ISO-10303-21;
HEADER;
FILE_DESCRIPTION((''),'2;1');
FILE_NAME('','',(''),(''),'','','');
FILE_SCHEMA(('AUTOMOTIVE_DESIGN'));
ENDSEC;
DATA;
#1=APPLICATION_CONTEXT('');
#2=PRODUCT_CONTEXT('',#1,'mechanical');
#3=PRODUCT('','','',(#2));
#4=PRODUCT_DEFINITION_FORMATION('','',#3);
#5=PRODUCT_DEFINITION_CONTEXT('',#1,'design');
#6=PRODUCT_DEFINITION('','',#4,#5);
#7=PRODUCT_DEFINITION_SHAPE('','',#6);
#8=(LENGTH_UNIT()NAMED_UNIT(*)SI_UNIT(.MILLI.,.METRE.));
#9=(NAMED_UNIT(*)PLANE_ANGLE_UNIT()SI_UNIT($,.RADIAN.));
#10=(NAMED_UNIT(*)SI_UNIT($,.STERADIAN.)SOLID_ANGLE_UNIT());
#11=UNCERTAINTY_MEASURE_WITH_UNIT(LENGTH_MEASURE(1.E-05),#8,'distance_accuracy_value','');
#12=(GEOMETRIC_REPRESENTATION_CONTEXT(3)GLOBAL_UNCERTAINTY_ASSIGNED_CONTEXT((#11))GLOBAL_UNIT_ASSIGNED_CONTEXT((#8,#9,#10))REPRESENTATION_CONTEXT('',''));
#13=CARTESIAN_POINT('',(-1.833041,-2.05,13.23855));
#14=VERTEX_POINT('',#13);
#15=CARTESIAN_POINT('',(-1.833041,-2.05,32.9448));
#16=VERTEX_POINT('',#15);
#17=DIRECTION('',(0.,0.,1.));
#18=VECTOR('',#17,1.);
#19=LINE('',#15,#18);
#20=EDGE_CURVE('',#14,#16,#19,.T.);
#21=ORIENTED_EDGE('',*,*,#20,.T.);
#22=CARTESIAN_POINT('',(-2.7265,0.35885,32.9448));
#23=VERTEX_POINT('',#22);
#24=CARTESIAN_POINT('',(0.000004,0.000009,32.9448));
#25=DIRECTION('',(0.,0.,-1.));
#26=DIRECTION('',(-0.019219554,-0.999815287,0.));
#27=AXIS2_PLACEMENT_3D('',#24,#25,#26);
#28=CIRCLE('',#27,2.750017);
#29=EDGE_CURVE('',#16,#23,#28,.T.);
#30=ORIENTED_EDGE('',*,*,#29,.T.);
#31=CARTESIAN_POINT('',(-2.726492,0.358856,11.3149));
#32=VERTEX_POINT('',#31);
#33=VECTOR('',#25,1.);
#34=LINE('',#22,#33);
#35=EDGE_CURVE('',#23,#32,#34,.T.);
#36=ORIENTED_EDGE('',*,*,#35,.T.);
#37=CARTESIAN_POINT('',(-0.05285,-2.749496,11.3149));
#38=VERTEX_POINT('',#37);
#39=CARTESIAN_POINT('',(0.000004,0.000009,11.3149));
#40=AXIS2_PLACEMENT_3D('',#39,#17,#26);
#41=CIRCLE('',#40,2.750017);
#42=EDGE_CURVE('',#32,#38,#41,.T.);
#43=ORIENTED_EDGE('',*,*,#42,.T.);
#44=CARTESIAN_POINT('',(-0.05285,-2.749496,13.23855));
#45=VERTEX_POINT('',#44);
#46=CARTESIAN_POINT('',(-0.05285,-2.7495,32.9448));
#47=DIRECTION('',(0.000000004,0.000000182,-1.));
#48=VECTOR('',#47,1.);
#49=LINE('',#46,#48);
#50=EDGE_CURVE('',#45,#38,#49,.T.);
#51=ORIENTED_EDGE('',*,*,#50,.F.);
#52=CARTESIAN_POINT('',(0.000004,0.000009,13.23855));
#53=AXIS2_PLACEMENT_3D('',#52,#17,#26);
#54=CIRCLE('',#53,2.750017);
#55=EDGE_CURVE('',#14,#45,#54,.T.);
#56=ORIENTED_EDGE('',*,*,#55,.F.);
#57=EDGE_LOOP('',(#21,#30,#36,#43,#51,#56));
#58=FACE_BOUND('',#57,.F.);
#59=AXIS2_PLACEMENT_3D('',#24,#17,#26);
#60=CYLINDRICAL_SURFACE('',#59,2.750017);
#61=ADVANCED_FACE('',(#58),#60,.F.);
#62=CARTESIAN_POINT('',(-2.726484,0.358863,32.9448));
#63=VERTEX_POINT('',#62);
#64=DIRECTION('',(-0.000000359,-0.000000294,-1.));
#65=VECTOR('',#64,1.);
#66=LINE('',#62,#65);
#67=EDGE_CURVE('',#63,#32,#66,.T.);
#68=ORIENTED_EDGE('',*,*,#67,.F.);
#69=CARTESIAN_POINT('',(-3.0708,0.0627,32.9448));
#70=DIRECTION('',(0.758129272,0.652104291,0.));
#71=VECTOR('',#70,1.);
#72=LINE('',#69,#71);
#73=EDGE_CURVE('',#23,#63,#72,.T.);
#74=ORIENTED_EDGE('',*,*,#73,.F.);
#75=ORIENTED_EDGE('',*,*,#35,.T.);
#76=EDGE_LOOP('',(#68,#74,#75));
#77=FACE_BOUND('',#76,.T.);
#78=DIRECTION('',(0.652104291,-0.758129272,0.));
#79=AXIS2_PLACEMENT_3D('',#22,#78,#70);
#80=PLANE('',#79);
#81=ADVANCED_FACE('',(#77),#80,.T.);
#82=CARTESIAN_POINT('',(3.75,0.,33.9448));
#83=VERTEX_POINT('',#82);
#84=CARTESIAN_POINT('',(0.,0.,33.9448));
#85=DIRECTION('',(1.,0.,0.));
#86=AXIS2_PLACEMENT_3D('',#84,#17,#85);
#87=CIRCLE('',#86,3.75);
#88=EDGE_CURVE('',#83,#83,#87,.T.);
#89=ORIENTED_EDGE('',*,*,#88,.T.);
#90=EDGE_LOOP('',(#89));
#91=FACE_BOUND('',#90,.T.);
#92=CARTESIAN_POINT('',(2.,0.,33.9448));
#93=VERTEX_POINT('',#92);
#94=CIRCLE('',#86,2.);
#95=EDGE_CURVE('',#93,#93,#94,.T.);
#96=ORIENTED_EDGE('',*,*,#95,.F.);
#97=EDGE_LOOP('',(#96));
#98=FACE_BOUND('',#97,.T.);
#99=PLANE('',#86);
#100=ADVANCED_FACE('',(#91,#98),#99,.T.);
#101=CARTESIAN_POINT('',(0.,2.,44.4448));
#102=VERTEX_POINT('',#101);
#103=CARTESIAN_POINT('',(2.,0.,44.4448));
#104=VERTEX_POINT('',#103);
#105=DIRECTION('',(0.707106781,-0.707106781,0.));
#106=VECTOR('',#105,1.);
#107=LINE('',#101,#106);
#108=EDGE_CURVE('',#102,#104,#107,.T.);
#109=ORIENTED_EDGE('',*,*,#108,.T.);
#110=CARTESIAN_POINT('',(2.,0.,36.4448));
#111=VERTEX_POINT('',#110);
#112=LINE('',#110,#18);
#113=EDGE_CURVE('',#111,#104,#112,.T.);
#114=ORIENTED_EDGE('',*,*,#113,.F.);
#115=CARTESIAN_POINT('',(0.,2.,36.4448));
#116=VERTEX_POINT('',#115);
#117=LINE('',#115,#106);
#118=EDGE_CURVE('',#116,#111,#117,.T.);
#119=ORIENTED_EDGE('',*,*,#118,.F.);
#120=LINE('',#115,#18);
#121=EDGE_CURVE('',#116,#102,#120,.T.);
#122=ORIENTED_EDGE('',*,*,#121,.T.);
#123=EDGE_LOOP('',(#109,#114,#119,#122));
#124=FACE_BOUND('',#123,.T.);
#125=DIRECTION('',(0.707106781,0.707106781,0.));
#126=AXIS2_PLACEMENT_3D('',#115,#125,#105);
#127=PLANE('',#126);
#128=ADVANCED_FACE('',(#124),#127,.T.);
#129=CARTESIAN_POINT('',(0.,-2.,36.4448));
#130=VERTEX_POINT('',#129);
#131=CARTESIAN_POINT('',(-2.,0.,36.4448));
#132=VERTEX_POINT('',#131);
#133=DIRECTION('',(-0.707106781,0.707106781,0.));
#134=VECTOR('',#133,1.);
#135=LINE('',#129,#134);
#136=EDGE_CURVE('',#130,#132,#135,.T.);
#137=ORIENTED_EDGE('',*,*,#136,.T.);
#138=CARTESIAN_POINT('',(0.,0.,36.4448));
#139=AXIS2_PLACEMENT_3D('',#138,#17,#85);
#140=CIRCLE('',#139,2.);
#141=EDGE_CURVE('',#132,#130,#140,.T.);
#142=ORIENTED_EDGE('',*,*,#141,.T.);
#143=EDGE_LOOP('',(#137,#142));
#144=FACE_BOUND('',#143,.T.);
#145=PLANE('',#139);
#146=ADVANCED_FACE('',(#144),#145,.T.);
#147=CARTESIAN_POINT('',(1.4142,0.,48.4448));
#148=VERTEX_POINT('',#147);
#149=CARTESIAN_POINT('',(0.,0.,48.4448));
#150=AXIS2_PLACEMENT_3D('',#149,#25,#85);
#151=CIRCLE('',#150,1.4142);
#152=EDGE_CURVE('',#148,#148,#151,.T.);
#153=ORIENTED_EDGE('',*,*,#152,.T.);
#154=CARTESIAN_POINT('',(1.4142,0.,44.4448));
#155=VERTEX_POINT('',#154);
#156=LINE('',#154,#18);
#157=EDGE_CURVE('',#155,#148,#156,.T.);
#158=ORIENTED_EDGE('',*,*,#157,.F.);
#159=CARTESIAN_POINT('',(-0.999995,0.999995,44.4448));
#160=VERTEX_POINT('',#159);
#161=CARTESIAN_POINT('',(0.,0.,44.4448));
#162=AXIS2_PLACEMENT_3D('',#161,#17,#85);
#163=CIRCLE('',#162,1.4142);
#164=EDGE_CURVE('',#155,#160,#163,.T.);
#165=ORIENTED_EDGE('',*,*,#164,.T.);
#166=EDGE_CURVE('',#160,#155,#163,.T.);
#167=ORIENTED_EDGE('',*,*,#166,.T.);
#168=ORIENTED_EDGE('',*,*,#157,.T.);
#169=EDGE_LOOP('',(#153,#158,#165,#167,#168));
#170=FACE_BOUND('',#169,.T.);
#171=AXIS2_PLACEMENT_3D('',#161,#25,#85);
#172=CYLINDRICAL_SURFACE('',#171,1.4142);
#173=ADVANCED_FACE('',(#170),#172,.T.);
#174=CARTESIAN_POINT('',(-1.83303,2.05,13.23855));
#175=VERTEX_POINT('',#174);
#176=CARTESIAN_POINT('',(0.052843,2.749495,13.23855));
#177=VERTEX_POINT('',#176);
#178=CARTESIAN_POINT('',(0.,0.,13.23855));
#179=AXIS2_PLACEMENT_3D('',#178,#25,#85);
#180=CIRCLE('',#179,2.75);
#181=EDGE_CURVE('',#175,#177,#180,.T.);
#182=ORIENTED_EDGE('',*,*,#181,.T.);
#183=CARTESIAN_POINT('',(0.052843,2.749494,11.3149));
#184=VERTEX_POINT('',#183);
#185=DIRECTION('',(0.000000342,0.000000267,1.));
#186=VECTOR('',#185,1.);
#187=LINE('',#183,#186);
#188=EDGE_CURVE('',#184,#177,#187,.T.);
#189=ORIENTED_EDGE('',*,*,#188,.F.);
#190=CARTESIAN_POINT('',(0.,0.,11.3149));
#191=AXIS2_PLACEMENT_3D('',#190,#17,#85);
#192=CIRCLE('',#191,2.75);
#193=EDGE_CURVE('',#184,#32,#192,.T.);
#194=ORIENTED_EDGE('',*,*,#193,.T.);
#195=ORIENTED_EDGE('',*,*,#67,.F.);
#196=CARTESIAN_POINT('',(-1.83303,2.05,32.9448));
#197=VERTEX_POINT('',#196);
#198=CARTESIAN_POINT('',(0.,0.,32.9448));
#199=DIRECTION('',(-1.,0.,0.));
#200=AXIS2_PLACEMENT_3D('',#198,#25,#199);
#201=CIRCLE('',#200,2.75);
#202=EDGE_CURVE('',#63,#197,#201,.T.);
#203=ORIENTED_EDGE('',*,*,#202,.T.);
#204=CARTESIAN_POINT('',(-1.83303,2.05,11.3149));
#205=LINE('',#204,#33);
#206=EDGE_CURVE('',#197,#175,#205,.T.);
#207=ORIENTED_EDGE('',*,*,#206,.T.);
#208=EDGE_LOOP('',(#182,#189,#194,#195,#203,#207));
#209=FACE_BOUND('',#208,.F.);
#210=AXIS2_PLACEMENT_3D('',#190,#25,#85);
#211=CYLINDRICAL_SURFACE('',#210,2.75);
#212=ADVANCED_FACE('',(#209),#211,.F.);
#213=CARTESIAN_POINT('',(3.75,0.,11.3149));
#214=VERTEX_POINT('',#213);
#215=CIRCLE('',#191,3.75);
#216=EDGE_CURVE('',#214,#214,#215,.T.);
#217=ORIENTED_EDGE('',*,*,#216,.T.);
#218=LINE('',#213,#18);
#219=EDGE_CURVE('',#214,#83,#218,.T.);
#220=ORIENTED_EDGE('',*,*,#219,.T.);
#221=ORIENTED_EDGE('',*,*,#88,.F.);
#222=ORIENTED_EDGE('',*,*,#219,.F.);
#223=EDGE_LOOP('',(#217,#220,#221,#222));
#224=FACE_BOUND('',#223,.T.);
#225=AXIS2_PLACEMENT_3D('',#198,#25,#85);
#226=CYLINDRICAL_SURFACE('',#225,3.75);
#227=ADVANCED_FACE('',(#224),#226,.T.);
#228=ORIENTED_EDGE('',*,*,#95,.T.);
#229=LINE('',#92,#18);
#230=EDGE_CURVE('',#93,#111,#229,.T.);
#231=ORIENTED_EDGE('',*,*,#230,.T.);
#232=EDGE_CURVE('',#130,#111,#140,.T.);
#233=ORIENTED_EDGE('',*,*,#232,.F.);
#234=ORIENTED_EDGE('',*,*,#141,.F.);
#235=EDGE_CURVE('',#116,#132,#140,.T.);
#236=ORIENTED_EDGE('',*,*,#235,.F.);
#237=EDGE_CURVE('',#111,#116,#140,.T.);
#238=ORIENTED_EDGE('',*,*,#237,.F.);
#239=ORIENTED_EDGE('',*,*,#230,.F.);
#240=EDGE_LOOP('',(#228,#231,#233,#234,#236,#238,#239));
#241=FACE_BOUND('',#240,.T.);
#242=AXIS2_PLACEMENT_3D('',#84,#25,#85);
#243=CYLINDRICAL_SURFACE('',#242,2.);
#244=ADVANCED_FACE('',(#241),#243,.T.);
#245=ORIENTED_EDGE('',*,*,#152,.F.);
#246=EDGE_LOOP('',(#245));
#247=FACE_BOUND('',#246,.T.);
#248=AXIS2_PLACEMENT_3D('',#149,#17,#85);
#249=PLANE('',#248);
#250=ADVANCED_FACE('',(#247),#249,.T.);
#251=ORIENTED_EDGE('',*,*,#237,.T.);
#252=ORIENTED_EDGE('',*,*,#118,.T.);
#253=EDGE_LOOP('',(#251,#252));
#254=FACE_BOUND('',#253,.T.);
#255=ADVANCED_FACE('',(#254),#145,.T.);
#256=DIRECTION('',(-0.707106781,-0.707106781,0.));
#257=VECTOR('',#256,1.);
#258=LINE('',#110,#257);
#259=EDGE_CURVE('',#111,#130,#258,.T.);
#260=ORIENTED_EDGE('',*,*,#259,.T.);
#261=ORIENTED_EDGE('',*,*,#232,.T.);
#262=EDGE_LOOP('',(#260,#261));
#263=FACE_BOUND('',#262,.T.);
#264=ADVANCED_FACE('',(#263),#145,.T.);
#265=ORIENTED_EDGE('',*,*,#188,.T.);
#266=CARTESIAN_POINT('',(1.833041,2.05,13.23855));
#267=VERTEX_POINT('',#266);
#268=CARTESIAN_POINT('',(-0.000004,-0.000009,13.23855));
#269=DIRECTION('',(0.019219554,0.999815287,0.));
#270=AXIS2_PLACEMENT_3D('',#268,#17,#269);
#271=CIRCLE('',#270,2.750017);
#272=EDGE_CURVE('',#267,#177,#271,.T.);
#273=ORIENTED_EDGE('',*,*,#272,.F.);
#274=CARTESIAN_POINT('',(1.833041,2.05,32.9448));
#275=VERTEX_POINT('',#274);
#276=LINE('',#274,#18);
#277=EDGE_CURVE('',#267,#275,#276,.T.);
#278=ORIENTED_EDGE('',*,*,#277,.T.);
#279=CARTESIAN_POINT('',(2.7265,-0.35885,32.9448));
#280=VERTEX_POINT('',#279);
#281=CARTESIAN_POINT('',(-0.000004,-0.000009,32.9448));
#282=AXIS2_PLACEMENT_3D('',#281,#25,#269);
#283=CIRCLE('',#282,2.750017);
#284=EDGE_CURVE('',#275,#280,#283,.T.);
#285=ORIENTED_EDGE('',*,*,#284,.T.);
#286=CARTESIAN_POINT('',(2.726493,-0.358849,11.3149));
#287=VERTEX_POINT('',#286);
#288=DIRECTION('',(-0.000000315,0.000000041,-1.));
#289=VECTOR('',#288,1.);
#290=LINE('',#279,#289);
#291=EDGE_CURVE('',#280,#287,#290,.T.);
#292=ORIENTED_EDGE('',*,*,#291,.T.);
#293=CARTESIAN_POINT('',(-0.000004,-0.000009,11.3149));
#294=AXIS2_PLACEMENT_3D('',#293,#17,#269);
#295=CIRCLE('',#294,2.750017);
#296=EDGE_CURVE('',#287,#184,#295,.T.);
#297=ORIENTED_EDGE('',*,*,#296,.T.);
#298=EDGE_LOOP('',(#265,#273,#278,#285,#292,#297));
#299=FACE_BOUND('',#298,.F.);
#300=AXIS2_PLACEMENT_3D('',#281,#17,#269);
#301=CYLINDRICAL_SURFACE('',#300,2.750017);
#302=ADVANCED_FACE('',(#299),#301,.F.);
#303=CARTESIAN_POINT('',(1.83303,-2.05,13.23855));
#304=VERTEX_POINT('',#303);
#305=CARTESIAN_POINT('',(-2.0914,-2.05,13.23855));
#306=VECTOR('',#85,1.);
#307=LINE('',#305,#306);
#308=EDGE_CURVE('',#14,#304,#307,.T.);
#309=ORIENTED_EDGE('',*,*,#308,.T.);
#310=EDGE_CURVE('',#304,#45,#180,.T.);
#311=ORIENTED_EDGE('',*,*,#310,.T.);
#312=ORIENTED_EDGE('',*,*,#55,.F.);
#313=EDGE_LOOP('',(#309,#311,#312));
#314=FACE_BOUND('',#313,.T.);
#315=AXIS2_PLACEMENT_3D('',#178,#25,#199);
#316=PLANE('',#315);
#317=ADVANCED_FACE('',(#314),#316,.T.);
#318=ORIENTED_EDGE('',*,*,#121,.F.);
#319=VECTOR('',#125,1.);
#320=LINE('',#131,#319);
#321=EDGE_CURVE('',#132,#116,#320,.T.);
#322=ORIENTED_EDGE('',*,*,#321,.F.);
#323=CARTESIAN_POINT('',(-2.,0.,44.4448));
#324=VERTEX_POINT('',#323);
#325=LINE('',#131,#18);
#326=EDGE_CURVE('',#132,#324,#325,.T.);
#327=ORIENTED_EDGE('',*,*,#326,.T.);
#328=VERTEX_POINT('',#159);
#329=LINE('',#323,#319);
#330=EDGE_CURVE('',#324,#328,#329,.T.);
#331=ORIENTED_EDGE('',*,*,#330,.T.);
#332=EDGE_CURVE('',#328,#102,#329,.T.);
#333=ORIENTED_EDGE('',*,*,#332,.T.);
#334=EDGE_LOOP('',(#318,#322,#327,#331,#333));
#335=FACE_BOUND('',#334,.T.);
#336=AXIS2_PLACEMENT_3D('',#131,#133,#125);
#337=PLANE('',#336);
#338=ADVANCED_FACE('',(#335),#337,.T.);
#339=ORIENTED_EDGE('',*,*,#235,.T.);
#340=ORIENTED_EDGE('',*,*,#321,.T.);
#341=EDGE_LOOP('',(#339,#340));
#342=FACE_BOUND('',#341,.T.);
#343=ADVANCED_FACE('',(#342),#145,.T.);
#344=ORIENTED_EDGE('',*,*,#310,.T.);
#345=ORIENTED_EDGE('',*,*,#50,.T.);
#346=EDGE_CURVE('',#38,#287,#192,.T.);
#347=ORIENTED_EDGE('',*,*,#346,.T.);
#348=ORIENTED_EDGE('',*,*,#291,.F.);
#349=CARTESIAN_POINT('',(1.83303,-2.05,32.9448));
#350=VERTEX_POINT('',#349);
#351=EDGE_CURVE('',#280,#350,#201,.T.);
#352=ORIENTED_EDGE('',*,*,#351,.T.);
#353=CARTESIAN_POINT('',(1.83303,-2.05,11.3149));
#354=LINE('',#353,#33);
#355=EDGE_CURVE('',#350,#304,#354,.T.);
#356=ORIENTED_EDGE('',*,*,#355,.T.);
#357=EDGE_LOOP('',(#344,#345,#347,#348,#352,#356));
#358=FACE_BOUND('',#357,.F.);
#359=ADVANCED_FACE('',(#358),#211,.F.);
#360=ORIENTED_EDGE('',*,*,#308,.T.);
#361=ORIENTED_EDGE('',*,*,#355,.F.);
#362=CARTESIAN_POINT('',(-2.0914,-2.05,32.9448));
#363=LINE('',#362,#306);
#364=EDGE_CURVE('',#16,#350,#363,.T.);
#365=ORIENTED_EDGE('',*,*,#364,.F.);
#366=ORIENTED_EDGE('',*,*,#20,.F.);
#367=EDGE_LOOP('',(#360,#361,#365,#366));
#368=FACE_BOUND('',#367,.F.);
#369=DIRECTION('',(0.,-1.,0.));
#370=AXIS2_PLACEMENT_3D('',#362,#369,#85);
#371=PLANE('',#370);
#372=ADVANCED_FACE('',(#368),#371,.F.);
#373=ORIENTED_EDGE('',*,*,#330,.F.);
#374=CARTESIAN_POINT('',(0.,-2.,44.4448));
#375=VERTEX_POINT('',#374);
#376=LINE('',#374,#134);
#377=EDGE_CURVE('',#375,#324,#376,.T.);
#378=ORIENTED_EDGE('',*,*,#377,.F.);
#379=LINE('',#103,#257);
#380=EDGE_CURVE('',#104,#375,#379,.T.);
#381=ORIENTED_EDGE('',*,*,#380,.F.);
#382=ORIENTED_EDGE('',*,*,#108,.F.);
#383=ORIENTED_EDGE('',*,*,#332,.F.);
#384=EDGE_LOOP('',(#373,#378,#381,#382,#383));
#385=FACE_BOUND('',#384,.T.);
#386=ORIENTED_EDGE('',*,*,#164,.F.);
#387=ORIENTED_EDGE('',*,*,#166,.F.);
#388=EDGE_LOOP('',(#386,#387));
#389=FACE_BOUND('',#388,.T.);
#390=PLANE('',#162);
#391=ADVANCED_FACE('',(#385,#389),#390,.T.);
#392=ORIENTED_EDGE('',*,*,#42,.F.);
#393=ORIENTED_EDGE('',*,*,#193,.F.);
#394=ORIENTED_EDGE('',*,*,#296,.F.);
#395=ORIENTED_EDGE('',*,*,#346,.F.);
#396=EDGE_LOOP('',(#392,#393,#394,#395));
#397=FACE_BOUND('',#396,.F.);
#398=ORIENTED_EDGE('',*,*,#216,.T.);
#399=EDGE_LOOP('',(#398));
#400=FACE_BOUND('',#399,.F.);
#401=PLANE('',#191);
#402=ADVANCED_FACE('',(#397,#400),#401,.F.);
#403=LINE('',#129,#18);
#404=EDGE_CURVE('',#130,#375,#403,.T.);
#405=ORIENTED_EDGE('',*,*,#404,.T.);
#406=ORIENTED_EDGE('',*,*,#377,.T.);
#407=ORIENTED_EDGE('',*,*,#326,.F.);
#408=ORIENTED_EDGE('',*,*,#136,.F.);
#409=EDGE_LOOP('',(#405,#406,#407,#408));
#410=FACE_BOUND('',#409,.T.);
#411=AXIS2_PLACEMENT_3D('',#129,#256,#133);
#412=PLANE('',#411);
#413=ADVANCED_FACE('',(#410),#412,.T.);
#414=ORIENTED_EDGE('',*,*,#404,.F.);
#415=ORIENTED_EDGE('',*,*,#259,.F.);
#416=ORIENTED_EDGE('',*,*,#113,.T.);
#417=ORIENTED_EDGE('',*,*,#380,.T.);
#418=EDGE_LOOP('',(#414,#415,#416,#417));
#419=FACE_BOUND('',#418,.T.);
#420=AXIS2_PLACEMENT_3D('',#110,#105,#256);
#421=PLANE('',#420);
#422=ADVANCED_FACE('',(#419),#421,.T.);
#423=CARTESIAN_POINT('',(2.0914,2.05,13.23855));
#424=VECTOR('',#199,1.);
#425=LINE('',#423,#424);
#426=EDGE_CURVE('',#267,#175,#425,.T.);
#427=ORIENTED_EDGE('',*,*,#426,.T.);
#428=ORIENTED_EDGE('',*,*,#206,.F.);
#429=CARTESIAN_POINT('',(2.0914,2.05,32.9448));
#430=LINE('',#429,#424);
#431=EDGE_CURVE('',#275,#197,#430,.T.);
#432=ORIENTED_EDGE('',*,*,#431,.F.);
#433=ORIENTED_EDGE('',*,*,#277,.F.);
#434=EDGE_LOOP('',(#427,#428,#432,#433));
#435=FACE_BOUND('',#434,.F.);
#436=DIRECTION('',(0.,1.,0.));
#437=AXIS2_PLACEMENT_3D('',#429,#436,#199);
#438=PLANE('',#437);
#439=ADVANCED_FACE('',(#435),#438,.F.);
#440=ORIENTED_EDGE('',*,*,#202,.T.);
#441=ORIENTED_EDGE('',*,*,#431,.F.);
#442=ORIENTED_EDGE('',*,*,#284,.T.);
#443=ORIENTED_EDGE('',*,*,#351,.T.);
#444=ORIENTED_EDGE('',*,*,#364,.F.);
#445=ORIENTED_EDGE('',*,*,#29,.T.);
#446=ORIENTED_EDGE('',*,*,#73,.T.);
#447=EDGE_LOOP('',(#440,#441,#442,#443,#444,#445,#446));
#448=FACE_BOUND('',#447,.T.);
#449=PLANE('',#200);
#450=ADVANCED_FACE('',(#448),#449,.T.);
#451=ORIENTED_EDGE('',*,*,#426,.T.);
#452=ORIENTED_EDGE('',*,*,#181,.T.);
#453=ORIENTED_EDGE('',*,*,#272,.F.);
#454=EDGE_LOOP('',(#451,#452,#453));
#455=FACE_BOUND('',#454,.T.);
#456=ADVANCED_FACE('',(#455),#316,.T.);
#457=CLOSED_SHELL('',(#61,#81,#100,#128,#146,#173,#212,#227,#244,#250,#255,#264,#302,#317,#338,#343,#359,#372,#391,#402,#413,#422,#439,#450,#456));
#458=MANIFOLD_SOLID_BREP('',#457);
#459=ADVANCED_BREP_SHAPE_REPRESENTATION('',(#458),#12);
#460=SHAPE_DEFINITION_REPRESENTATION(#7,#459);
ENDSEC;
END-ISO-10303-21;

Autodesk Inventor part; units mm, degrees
ref_plane "YZ Plane" through (0, 0, 0) normal (1, 0, 0) x (0, 1, 0)
ref_plane "XZ Plane" through (0, 0, 0) normal (0, 1, 0) x (-1, 0, 0)
ref_plane "XY Plane" through (0, 0, 0) normal (0, 0, 1) x (1, 0, 0)
sketch "Sketch1" plane through (0, 0, 0) normal (0, 0, 1) x (1, 0, 0)
  circle A0 centre (0, 0) radius 4.8 projected
  arc A1 (-1.2481, -4.6349) -> (4.7694, 0.541) centre (0, 0) ccw projected
  circle A2 centre (0, 0) radius 9 projected
  circle A3 centre (0, 0) radius 4.8
  circle A4 centre (0, 0) radius 7.5
  circle A5 centre (0, 0) radius 5.5
  point P0 (0, 0)
  dimension "d0" = 15
  dimension "d23" = 11
extrude "Extrusion1" add sketch "Sketch1" along normal blind 9 contours A4
sketch "Sketch2" plane through (0, 0, 9) normal (0, 0, 1) x (1, 0, 0)
  line L0 (4.7694, 0.541) -> (-1.2481, -4.6349) projected
  line L1 (-4.7694, -0.541) -> (1.2481, 4.6349) projected
  circle A0 centre (0, 0) radius 7.5
  line L2 (-5.478, -0.491) -> (1.3046, 5.343)
  line L3 (-2.0867, 2.426) -> (-5.478, -0.491)
  line L4 (-1.3046, -5.343) -> (5.478, 0.491)
  line L5 (2.0867, -2.426) -> (-0.6256, -4.7591)
  arc A1 (-5.478, -0.491) -> (-1.3046, -5.343) centre (0, 0) ccw
  arc A2 (5.478, 0.491) -> (1.3046, 5.343) centre (0, 0) ccw
extrude "Extrusion2" add sketch "Sketch2" along normal blind 34.2598
sketch "Sketch3" plane through (0, 0, 43.2598) normal (0, 0, 1) x (1, 0, 0)
  circle A0 centre (0, 0) radius 7.5 projected
  circle A1 centre (0, 0) radius 7.5
  point P0 (0, 0)
extrude "Extrusion3" add sketch "Sketch3" along normal blind 2
sketch "Sketch5" plane through (0, 0, 45.2598) normal (0, 0, 1) x (1, 0, 0)
  circle A0 centre (0, 0) radius 4
  dimension "d10" = 8
extrude "Extrusion5" add sketch "Sketch5" along normal blind 5
sketch "Sketch6" plane through (0, 0, 50.2598) normal (0, 0, 1) x (1, 0, 0)
  circle A0 centre (0, 0) radius 4 projected
  line L0 (-4, 0) -> (0, 4)
  line L1 (0, 4) -> (4, 0)
  line L2 (4, 0) -> (0, -4)
  line L3 (0, -4) -> (-4, 0)
extrude "Extrusion6" add sketch "Sketch6" along normal blind 16 contours L2 L3 L0 L1
sketch "Sketch7" plane through (0, 0, 66.2598) normal (0, 0, 1) x (1, 0, 0)
  circle A0 centre (0, 0) radius 2.8284
  line L0 (0, 4) -> (-4, 0) projected
extrude "Extrusion7" add sketch "Sketch7" along normal blind 8
sketch "Sketch8" plane through (0, 0, 9) normal (0, 0, -1) x (-1, 0, 0)
  point P0 (0, 0)
sketch "Sketch9" plane through (0, 0, 43.2598) normal (0, 0, -1) x (-1, 0, 0)
  line L0 (1.0362, -6.2993) -> (-6.5532, 0.2287)
  line L1 (6.1416, 0.1254) -> (-2.464, 7.5275)
  arc A0 (0.1057, -5.499) -> (5.453, 0.7177) centre (0, 0) ccw
  arc A1 (-0.1057, 5.499) -> (-5.453, -0.7177) centre (0, 0) ccw
  point P0 (0, 0)
  point P1 (0, 0)
extrude "Extrusion8" cut sketch "Sketch9" along normal blind 50
sketch "Sketch10" plane through (0, 0, 43.2598) normal (0, 0, -1) x (-1, 0, 0)
  circle A0 centre (0, 0) radius 5.5
  dimension "d28" = 11
extrude "Extrusion9" cut sketch "Sketch10" along normal blind 50
sketch "Sketch11" plane through (0, 0, 43.2598) normal (0, 0, -1) x (-1, 0, 0)
  line L0 (-4.1828, 4.1) -> (4.1828, 4.1)
  line L1 (4.1828, -4.1) -> (-4.1828, -4.1)
  line L2 (-12.4976, 4.1) -> (12.4976, -4.1) construction
  line L3 (12.4976, 4.1) -> (-12.4976, -4.1) construction
  arc A0 (4.1828, 4.1) -> (-4.1828, 4.1) centre (0, 0) ccw
  arc A1 (-4.1828, -4.1) -> (4.1828, -4.1) centre (0, 0) ccw
  point P0 (0, 0)
  dimension "d34" = 8.2
extrude "Extrusion10" add sketch "Sketch11" along normal blind 39.4125
scale "Scale1" factors (0.5, 0.5, 0.5) then translate (0, 0, 11.3149) bodies 1
properties part number "MainGearShaft"
